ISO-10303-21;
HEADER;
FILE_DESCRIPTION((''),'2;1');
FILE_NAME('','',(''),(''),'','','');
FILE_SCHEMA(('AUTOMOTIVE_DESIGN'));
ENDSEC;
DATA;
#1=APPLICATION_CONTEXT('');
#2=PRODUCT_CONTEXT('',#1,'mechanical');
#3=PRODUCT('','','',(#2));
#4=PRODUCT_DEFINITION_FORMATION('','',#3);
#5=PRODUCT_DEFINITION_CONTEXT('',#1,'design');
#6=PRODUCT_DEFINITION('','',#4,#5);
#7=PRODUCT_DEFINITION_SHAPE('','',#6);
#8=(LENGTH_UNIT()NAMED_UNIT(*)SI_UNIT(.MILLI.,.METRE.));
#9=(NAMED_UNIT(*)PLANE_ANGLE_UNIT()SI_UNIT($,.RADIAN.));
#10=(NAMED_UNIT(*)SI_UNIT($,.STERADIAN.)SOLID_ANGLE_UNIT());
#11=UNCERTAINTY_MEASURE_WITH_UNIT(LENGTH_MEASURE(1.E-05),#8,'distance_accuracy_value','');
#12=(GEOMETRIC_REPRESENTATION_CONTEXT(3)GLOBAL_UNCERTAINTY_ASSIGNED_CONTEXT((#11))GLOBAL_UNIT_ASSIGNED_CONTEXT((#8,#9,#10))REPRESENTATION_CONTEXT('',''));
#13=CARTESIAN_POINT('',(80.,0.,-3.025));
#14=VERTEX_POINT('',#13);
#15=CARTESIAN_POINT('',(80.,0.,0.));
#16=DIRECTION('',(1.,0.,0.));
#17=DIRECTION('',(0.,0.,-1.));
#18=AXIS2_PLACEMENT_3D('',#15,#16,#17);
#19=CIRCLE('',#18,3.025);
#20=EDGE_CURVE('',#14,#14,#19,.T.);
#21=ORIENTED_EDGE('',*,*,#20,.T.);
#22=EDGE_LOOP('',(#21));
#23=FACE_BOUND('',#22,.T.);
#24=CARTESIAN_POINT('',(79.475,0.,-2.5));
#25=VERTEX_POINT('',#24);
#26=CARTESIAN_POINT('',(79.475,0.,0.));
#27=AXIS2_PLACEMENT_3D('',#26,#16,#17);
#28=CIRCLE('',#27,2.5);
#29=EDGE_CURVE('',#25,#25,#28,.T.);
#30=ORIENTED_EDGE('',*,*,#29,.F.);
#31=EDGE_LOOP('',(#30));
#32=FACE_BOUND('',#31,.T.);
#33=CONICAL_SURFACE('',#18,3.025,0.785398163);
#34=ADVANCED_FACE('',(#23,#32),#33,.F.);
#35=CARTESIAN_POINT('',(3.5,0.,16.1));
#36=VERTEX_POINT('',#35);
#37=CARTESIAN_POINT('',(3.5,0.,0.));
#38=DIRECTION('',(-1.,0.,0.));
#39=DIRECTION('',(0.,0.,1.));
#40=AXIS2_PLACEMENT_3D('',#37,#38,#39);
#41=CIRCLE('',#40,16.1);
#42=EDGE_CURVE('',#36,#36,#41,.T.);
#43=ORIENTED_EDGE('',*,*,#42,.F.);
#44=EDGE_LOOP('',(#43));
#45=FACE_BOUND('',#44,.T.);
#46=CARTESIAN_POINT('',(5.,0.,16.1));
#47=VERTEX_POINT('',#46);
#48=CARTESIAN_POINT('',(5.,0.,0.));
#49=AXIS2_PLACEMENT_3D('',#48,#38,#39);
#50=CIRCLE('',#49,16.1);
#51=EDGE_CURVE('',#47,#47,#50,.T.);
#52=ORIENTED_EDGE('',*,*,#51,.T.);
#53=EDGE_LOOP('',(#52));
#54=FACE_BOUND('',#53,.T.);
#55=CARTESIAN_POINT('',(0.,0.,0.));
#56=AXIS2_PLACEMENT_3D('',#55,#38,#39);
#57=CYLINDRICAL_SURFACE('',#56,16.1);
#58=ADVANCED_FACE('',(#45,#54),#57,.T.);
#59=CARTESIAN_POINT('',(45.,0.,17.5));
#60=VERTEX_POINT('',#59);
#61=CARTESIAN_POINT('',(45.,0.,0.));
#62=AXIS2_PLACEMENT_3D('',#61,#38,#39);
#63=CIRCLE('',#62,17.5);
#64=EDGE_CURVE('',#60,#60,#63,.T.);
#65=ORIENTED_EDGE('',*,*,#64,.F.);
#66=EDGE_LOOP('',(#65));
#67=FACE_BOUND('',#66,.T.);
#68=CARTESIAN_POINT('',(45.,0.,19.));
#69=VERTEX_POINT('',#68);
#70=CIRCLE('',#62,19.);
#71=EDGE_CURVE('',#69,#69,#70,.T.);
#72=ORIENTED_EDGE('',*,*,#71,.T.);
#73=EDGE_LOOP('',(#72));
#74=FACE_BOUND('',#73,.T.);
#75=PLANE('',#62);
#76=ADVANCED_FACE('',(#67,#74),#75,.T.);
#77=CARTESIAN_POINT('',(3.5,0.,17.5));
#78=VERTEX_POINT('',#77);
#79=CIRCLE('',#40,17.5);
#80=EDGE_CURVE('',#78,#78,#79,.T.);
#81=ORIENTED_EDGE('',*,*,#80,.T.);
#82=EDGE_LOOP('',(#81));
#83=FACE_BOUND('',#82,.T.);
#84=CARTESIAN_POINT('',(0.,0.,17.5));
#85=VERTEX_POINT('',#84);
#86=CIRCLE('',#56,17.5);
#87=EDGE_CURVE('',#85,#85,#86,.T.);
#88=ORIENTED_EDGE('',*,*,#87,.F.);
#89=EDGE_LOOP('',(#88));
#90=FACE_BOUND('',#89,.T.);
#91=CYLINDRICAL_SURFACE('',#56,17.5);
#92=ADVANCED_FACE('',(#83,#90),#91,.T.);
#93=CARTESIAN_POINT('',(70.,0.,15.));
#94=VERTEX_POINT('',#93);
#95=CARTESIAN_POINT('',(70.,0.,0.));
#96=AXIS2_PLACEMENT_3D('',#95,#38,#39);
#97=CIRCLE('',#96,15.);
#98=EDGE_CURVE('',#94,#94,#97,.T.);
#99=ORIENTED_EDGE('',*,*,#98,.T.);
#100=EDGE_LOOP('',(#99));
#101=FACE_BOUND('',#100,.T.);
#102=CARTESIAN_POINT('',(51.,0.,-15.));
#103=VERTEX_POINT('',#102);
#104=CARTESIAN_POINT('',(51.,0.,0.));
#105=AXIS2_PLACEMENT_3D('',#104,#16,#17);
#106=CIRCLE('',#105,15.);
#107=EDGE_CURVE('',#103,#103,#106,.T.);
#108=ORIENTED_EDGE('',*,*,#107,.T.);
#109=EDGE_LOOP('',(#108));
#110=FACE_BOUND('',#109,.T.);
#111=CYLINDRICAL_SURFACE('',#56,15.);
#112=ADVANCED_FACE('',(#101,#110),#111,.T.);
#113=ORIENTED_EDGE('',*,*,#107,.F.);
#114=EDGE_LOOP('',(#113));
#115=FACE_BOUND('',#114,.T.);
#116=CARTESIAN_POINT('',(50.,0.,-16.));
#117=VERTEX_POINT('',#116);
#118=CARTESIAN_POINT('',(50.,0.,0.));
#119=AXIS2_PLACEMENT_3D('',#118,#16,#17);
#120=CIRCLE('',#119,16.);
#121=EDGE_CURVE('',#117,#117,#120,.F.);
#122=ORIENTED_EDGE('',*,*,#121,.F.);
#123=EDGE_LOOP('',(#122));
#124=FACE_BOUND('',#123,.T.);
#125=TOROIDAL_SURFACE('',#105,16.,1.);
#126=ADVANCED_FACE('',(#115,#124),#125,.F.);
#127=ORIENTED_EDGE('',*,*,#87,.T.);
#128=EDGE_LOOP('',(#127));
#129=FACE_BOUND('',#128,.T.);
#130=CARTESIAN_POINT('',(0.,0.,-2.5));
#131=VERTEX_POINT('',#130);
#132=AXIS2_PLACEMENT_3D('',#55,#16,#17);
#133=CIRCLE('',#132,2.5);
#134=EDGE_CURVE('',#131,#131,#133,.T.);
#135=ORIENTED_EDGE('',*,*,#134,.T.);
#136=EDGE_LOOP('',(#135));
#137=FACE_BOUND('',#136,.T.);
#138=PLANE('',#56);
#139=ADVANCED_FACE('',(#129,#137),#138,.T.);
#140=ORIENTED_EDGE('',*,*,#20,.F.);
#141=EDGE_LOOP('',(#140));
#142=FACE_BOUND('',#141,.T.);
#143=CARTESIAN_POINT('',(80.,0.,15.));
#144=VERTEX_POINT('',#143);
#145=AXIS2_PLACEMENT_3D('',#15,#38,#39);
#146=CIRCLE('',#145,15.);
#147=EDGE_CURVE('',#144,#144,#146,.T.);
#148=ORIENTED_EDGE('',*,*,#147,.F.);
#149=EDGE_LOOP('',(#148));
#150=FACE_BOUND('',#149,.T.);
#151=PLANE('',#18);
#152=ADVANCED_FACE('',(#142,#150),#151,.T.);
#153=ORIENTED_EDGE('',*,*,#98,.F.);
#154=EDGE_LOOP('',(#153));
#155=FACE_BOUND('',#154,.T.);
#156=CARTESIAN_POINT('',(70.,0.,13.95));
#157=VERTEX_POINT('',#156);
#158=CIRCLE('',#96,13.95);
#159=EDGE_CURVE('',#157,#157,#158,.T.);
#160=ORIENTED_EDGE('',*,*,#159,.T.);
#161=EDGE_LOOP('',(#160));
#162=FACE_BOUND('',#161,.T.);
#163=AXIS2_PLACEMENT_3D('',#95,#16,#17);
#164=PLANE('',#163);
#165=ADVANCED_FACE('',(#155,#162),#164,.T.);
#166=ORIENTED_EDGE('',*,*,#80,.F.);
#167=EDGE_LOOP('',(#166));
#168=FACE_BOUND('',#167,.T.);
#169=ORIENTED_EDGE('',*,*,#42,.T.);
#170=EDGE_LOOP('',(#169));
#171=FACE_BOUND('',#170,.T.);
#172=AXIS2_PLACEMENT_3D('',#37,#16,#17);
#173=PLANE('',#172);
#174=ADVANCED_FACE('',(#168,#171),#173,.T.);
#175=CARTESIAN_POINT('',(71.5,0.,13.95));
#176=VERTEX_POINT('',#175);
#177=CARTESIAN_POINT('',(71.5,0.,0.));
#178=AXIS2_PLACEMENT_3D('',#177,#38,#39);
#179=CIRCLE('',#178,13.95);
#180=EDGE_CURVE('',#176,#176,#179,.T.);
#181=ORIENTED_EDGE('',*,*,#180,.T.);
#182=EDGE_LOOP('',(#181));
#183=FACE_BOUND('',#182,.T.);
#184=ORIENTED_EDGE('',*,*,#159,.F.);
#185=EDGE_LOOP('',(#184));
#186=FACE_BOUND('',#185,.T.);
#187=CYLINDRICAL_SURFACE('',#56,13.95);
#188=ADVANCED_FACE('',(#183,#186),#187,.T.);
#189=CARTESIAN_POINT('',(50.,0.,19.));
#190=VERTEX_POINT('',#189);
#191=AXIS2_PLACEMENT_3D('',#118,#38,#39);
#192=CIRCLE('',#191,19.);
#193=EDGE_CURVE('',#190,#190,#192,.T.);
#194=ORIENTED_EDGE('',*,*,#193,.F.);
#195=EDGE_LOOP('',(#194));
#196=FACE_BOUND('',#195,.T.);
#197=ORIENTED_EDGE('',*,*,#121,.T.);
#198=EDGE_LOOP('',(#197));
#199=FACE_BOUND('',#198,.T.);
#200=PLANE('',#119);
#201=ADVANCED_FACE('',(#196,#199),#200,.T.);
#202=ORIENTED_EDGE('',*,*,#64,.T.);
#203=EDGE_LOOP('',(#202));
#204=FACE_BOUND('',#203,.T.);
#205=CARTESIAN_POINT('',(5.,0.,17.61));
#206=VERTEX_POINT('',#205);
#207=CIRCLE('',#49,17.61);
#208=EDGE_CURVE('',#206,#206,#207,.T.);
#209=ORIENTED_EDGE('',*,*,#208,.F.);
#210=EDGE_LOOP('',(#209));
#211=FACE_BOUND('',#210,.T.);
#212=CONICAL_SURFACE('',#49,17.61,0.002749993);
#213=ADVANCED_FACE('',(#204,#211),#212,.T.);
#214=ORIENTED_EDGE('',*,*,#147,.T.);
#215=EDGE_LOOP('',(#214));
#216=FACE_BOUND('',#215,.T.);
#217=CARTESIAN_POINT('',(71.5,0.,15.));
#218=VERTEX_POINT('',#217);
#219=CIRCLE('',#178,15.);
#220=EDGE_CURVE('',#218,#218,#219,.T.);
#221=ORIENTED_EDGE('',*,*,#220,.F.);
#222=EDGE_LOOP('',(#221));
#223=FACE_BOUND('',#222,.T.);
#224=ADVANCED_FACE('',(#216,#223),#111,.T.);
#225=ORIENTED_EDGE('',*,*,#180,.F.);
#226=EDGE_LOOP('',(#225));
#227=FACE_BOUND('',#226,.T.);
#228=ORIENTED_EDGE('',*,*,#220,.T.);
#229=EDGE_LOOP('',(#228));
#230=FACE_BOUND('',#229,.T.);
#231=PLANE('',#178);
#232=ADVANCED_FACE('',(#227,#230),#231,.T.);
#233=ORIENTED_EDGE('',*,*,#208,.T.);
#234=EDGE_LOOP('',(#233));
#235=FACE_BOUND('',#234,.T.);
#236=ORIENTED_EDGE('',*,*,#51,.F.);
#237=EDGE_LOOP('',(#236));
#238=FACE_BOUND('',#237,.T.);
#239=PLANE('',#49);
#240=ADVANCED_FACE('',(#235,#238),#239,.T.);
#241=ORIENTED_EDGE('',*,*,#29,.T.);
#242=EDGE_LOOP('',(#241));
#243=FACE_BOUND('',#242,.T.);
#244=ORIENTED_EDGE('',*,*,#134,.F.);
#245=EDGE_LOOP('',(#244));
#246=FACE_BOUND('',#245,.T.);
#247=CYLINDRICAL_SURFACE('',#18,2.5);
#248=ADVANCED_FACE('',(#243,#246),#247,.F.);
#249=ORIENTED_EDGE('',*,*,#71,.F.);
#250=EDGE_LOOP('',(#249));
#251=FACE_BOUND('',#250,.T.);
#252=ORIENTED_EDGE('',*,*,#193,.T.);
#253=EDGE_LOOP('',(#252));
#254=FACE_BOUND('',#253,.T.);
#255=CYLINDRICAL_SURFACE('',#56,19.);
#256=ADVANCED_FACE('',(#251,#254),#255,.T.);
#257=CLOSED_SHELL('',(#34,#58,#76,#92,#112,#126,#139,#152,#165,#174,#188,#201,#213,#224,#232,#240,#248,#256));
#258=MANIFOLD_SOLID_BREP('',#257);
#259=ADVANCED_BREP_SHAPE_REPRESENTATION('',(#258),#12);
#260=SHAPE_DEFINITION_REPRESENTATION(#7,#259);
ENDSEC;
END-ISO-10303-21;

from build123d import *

# Parameters (mm, degrees)
FILLET1_R                   = 1
M6_TAPPED_HOLE1_D           = 5
M6_TAPPED_HOLE1_CSINK_D     = 6.05
M6_TAPPED_HOLE1_CSINK_ANGLE = 90


# Read off the part's stored shape, not the designer's step: Revolve1
with BuildPart() as part:
    # Revolve1 outline → Revolve1 (revolve)
    with BuildSketch(Plane.YX):
        Polygon((0, 80), (0, 0), (17.5, 0), (17.5, 3.5), (16.1, 3.5), (16.1, 5), (17.61, 5), (17.5, 45), (19, 45), (19, 50), (15, 50), (15, 70), (13.95, 70), (13.95, 71.5), (15, 71.5), (15, 80), align=None)
    revolve(axis=Axis((0, 0, 0), (1, 0, 0)))

    # Fillet1
    fillet1_edges = [part.edges().sort_by_distance(p)[0] for p in [
        (50, -15, 0),
    ]]
    fillet(fillet1_edges, radius=FILLET1_R)

    # M6 Tapped Hole1 (through all)
    with Locations(Plane(origin=(80, 0, 0), x_dir=(0, 0, 1), z_dir=(1, 0, 0))):
        with Locations((0, 0)):
            CounterSinkHole(M6_TAPPED_HOLE1_D / 2, M6_TAPPED_HOLE1_CSINK_D / 2, counter_sink_angle=M6_TAPPED_HOLE1_CSINK_ANGLE)


solid = part.part
